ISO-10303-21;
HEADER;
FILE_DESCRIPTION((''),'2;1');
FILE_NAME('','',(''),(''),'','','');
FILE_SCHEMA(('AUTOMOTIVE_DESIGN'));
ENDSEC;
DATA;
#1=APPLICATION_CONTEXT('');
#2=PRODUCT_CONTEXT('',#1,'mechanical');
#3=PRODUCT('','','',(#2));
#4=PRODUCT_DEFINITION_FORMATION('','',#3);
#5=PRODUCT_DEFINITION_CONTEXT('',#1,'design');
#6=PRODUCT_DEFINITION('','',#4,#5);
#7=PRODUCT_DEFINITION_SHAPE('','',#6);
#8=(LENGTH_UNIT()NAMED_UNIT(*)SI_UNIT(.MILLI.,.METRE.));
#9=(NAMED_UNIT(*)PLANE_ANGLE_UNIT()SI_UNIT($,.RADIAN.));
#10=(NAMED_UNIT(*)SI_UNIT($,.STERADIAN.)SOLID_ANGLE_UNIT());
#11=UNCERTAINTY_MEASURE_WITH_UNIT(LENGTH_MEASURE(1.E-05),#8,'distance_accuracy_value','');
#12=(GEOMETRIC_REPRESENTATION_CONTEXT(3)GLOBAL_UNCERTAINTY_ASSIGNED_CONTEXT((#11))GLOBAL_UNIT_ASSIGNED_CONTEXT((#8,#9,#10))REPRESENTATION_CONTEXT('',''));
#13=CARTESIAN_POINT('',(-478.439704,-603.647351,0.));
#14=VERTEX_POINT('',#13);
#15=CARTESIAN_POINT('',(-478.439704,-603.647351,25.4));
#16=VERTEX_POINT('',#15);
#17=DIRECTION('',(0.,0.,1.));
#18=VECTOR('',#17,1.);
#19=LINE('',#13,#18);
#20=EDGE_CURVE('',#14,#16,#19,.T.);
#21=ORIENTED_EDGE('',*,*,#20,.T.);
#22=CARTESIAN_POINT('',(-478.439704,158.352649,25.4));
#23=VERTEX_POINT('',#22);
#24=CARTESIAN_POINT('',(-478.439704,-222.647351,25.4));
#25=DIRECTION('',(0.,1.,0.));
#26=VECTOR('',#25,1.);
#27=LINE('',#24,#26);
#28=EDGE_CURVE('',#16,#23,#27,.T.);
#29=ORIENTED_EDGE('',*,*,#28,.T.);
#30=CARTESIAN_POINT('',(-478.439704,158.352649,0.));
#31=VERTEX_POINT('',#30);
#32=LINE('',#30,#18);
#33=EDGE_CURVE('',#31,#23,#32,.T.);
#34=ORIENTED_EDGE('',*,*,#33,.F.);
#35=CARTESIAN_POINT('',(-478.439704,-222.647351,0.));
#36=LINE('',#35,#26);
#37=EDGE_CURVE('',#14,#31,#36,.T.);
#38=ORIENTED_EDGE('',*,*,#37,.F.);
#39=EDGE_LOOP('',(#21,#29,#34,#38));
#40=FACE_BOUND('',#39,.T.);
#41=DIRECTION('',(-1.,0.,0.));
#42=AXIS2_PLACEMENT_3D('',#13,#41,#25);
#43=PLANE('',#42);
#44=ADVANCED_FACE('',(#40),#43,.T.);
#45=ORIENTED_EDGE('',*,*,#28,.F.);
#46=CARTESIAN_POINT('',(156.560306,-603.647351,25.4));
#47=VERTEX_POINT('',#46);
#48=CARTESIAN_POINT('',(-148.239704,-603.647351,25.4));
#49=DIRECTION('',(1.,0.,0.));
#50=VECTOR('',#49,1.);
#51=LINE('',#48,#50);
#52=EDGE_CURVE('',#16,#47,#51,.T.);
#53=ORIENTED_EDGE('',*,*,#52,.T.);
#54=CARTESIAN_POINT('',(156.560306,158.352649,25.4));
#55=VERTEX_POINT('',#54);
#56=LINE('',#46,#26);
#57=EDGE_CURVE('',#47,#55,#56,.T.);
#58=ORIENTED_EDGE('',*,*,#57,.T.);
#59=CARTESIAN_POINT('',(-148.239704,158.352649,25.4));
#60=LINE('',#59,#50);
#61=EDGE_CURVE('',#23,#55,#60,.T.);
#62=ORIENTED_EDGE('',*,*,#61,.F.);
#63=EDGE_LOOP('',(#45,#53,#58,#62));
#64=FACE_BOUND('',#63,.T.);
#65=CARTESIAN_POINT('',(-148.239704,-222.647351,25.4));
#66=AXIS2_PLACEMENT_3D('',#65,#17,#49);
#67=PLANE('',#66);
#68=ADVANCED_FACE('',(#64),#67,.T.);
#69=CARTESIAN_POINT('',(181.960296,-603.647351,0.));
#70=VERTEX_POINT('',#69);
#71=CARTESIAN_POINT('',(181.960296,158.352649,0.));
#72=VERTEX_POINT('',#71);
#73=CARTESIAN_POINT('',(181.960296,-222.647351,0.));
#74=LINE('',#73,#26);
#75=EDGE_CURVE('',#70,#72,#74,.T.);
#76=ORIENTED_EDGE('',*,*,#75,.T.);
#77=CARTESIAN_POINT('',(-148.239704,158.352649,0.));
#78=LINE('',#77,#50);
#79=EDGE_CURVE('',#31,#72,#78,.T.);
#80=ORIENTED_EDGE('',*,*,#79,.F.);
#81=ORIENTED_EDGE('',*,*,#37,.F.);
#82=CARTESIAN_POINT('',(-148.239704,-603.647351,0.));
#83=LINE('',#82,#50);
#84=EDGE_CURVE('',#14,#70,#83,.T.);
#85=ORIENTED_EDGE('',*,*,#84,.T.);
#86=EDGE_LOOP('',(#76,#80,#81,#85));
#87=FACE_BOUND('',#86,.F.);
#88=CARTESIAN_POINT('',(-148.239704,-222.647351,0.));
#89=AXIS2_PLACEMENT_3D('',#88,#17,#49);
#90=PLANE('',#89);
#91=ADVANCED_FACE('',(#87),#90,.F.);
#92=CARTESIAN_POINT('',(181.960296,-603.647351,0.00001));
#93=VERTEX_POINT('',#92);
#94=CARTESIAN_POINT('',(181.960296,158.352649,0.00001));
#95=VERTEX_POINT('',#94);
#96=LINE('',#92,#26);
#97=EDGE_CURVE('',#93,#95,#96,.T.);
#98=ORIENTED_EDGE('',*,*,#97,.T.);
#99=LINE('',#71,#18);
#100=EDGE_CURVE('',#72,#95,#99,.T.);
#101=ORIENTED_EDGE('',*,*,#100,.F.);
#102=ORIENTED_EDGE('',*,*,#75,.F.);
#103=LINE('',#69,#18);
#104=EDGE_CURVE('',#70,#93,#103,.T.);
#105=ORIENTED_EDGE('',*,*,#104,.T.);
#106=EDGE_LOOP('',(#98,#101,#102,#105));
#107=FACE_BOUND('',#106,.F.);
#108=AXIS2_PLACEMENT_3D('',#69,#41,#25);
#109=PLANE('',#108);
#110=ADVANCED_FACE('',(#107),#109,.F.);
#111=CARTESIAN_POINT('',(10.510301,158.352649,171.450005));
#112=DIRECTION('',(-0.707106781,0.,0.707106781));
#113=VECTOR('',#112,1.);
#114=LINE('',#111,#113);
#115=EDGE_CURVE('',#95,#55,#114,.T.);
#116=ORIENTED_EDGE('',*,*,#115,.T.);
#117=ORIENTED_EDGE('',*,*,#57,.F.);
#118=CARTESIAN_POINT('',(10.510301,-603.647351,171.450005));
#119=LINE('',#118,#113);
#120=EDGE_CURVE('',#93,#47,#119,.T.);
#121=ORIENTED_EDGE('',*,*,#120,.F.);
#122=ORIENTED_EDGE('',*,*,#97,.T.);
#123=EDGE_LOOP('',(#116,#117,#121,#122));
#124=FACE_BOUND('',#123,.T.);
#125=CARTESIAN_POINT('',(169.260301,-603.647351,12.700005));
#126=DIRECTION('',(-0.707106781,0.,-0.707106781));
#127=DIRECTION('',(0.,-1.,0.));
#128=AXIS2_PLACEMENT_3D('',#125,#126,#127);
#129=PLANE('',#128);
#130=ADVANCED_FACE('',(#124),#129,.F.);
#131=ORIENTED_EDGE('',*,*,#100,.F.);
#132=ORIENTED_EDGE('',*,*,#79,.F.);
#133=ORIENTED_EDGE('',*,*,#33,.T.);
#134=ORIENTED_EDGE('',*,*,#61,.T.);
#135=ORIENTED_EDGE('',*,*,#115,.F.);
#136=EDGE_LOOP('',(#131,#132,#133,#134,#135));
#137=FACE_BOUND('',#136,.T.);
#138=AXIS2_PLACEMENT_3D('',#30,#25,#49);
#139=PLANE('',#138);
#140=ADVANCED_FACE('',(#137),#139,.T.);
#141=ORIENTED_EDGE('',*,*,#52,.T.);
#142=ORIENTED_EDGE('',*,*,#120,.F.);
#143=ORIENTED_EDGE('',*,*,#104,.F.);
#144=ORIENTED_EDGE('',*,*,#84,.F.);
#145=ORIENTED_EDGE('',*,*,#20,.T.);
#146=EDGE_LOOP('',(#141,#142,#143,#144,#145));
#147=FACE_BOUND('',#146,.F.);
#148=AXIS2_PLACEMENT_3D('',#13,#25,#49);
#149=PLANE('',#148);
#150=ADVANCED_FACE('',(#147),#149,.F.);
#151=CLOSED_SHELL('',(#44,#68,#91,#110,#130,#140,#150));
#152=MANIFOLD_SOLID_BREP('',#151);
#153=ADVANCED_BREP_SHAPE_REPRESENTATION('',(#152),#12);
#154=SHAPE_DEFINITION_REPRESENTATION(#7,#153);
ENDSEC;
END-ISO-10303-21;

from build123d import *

# Parameters (mm, degrees)
F0_W     = 660.4
F0_H     = 762
F1_DEPTH = 25.4
F2_SIZE  = 25.39999


# Not quite as in the source:
# - a fillet or chamfer is up to 0.001 mm smaller than in the source, because OpenCascade refuses the exact size


with BuildPart() as f1:
    # F0 (on Top) → F1 (new body)
    with BuildSketch(Plane.XY):
        with Locations((-148.2397035837, -222.647351265)):
            Rectangle(F0_W, F0_H)
    extrude(amount=F1_DEPTH)

    # F2 (size 25.4 in the source; OpenCascade refuses exactly that, so slightly less here)
    f2_edges = [f1.edges().sort_by_distance(p)[0] for p in [
        (181.960296, -222.647351, 25.4),
    ]]
    chamfer(f2_edges, length=F2_SIZE)


solid = f1.part
